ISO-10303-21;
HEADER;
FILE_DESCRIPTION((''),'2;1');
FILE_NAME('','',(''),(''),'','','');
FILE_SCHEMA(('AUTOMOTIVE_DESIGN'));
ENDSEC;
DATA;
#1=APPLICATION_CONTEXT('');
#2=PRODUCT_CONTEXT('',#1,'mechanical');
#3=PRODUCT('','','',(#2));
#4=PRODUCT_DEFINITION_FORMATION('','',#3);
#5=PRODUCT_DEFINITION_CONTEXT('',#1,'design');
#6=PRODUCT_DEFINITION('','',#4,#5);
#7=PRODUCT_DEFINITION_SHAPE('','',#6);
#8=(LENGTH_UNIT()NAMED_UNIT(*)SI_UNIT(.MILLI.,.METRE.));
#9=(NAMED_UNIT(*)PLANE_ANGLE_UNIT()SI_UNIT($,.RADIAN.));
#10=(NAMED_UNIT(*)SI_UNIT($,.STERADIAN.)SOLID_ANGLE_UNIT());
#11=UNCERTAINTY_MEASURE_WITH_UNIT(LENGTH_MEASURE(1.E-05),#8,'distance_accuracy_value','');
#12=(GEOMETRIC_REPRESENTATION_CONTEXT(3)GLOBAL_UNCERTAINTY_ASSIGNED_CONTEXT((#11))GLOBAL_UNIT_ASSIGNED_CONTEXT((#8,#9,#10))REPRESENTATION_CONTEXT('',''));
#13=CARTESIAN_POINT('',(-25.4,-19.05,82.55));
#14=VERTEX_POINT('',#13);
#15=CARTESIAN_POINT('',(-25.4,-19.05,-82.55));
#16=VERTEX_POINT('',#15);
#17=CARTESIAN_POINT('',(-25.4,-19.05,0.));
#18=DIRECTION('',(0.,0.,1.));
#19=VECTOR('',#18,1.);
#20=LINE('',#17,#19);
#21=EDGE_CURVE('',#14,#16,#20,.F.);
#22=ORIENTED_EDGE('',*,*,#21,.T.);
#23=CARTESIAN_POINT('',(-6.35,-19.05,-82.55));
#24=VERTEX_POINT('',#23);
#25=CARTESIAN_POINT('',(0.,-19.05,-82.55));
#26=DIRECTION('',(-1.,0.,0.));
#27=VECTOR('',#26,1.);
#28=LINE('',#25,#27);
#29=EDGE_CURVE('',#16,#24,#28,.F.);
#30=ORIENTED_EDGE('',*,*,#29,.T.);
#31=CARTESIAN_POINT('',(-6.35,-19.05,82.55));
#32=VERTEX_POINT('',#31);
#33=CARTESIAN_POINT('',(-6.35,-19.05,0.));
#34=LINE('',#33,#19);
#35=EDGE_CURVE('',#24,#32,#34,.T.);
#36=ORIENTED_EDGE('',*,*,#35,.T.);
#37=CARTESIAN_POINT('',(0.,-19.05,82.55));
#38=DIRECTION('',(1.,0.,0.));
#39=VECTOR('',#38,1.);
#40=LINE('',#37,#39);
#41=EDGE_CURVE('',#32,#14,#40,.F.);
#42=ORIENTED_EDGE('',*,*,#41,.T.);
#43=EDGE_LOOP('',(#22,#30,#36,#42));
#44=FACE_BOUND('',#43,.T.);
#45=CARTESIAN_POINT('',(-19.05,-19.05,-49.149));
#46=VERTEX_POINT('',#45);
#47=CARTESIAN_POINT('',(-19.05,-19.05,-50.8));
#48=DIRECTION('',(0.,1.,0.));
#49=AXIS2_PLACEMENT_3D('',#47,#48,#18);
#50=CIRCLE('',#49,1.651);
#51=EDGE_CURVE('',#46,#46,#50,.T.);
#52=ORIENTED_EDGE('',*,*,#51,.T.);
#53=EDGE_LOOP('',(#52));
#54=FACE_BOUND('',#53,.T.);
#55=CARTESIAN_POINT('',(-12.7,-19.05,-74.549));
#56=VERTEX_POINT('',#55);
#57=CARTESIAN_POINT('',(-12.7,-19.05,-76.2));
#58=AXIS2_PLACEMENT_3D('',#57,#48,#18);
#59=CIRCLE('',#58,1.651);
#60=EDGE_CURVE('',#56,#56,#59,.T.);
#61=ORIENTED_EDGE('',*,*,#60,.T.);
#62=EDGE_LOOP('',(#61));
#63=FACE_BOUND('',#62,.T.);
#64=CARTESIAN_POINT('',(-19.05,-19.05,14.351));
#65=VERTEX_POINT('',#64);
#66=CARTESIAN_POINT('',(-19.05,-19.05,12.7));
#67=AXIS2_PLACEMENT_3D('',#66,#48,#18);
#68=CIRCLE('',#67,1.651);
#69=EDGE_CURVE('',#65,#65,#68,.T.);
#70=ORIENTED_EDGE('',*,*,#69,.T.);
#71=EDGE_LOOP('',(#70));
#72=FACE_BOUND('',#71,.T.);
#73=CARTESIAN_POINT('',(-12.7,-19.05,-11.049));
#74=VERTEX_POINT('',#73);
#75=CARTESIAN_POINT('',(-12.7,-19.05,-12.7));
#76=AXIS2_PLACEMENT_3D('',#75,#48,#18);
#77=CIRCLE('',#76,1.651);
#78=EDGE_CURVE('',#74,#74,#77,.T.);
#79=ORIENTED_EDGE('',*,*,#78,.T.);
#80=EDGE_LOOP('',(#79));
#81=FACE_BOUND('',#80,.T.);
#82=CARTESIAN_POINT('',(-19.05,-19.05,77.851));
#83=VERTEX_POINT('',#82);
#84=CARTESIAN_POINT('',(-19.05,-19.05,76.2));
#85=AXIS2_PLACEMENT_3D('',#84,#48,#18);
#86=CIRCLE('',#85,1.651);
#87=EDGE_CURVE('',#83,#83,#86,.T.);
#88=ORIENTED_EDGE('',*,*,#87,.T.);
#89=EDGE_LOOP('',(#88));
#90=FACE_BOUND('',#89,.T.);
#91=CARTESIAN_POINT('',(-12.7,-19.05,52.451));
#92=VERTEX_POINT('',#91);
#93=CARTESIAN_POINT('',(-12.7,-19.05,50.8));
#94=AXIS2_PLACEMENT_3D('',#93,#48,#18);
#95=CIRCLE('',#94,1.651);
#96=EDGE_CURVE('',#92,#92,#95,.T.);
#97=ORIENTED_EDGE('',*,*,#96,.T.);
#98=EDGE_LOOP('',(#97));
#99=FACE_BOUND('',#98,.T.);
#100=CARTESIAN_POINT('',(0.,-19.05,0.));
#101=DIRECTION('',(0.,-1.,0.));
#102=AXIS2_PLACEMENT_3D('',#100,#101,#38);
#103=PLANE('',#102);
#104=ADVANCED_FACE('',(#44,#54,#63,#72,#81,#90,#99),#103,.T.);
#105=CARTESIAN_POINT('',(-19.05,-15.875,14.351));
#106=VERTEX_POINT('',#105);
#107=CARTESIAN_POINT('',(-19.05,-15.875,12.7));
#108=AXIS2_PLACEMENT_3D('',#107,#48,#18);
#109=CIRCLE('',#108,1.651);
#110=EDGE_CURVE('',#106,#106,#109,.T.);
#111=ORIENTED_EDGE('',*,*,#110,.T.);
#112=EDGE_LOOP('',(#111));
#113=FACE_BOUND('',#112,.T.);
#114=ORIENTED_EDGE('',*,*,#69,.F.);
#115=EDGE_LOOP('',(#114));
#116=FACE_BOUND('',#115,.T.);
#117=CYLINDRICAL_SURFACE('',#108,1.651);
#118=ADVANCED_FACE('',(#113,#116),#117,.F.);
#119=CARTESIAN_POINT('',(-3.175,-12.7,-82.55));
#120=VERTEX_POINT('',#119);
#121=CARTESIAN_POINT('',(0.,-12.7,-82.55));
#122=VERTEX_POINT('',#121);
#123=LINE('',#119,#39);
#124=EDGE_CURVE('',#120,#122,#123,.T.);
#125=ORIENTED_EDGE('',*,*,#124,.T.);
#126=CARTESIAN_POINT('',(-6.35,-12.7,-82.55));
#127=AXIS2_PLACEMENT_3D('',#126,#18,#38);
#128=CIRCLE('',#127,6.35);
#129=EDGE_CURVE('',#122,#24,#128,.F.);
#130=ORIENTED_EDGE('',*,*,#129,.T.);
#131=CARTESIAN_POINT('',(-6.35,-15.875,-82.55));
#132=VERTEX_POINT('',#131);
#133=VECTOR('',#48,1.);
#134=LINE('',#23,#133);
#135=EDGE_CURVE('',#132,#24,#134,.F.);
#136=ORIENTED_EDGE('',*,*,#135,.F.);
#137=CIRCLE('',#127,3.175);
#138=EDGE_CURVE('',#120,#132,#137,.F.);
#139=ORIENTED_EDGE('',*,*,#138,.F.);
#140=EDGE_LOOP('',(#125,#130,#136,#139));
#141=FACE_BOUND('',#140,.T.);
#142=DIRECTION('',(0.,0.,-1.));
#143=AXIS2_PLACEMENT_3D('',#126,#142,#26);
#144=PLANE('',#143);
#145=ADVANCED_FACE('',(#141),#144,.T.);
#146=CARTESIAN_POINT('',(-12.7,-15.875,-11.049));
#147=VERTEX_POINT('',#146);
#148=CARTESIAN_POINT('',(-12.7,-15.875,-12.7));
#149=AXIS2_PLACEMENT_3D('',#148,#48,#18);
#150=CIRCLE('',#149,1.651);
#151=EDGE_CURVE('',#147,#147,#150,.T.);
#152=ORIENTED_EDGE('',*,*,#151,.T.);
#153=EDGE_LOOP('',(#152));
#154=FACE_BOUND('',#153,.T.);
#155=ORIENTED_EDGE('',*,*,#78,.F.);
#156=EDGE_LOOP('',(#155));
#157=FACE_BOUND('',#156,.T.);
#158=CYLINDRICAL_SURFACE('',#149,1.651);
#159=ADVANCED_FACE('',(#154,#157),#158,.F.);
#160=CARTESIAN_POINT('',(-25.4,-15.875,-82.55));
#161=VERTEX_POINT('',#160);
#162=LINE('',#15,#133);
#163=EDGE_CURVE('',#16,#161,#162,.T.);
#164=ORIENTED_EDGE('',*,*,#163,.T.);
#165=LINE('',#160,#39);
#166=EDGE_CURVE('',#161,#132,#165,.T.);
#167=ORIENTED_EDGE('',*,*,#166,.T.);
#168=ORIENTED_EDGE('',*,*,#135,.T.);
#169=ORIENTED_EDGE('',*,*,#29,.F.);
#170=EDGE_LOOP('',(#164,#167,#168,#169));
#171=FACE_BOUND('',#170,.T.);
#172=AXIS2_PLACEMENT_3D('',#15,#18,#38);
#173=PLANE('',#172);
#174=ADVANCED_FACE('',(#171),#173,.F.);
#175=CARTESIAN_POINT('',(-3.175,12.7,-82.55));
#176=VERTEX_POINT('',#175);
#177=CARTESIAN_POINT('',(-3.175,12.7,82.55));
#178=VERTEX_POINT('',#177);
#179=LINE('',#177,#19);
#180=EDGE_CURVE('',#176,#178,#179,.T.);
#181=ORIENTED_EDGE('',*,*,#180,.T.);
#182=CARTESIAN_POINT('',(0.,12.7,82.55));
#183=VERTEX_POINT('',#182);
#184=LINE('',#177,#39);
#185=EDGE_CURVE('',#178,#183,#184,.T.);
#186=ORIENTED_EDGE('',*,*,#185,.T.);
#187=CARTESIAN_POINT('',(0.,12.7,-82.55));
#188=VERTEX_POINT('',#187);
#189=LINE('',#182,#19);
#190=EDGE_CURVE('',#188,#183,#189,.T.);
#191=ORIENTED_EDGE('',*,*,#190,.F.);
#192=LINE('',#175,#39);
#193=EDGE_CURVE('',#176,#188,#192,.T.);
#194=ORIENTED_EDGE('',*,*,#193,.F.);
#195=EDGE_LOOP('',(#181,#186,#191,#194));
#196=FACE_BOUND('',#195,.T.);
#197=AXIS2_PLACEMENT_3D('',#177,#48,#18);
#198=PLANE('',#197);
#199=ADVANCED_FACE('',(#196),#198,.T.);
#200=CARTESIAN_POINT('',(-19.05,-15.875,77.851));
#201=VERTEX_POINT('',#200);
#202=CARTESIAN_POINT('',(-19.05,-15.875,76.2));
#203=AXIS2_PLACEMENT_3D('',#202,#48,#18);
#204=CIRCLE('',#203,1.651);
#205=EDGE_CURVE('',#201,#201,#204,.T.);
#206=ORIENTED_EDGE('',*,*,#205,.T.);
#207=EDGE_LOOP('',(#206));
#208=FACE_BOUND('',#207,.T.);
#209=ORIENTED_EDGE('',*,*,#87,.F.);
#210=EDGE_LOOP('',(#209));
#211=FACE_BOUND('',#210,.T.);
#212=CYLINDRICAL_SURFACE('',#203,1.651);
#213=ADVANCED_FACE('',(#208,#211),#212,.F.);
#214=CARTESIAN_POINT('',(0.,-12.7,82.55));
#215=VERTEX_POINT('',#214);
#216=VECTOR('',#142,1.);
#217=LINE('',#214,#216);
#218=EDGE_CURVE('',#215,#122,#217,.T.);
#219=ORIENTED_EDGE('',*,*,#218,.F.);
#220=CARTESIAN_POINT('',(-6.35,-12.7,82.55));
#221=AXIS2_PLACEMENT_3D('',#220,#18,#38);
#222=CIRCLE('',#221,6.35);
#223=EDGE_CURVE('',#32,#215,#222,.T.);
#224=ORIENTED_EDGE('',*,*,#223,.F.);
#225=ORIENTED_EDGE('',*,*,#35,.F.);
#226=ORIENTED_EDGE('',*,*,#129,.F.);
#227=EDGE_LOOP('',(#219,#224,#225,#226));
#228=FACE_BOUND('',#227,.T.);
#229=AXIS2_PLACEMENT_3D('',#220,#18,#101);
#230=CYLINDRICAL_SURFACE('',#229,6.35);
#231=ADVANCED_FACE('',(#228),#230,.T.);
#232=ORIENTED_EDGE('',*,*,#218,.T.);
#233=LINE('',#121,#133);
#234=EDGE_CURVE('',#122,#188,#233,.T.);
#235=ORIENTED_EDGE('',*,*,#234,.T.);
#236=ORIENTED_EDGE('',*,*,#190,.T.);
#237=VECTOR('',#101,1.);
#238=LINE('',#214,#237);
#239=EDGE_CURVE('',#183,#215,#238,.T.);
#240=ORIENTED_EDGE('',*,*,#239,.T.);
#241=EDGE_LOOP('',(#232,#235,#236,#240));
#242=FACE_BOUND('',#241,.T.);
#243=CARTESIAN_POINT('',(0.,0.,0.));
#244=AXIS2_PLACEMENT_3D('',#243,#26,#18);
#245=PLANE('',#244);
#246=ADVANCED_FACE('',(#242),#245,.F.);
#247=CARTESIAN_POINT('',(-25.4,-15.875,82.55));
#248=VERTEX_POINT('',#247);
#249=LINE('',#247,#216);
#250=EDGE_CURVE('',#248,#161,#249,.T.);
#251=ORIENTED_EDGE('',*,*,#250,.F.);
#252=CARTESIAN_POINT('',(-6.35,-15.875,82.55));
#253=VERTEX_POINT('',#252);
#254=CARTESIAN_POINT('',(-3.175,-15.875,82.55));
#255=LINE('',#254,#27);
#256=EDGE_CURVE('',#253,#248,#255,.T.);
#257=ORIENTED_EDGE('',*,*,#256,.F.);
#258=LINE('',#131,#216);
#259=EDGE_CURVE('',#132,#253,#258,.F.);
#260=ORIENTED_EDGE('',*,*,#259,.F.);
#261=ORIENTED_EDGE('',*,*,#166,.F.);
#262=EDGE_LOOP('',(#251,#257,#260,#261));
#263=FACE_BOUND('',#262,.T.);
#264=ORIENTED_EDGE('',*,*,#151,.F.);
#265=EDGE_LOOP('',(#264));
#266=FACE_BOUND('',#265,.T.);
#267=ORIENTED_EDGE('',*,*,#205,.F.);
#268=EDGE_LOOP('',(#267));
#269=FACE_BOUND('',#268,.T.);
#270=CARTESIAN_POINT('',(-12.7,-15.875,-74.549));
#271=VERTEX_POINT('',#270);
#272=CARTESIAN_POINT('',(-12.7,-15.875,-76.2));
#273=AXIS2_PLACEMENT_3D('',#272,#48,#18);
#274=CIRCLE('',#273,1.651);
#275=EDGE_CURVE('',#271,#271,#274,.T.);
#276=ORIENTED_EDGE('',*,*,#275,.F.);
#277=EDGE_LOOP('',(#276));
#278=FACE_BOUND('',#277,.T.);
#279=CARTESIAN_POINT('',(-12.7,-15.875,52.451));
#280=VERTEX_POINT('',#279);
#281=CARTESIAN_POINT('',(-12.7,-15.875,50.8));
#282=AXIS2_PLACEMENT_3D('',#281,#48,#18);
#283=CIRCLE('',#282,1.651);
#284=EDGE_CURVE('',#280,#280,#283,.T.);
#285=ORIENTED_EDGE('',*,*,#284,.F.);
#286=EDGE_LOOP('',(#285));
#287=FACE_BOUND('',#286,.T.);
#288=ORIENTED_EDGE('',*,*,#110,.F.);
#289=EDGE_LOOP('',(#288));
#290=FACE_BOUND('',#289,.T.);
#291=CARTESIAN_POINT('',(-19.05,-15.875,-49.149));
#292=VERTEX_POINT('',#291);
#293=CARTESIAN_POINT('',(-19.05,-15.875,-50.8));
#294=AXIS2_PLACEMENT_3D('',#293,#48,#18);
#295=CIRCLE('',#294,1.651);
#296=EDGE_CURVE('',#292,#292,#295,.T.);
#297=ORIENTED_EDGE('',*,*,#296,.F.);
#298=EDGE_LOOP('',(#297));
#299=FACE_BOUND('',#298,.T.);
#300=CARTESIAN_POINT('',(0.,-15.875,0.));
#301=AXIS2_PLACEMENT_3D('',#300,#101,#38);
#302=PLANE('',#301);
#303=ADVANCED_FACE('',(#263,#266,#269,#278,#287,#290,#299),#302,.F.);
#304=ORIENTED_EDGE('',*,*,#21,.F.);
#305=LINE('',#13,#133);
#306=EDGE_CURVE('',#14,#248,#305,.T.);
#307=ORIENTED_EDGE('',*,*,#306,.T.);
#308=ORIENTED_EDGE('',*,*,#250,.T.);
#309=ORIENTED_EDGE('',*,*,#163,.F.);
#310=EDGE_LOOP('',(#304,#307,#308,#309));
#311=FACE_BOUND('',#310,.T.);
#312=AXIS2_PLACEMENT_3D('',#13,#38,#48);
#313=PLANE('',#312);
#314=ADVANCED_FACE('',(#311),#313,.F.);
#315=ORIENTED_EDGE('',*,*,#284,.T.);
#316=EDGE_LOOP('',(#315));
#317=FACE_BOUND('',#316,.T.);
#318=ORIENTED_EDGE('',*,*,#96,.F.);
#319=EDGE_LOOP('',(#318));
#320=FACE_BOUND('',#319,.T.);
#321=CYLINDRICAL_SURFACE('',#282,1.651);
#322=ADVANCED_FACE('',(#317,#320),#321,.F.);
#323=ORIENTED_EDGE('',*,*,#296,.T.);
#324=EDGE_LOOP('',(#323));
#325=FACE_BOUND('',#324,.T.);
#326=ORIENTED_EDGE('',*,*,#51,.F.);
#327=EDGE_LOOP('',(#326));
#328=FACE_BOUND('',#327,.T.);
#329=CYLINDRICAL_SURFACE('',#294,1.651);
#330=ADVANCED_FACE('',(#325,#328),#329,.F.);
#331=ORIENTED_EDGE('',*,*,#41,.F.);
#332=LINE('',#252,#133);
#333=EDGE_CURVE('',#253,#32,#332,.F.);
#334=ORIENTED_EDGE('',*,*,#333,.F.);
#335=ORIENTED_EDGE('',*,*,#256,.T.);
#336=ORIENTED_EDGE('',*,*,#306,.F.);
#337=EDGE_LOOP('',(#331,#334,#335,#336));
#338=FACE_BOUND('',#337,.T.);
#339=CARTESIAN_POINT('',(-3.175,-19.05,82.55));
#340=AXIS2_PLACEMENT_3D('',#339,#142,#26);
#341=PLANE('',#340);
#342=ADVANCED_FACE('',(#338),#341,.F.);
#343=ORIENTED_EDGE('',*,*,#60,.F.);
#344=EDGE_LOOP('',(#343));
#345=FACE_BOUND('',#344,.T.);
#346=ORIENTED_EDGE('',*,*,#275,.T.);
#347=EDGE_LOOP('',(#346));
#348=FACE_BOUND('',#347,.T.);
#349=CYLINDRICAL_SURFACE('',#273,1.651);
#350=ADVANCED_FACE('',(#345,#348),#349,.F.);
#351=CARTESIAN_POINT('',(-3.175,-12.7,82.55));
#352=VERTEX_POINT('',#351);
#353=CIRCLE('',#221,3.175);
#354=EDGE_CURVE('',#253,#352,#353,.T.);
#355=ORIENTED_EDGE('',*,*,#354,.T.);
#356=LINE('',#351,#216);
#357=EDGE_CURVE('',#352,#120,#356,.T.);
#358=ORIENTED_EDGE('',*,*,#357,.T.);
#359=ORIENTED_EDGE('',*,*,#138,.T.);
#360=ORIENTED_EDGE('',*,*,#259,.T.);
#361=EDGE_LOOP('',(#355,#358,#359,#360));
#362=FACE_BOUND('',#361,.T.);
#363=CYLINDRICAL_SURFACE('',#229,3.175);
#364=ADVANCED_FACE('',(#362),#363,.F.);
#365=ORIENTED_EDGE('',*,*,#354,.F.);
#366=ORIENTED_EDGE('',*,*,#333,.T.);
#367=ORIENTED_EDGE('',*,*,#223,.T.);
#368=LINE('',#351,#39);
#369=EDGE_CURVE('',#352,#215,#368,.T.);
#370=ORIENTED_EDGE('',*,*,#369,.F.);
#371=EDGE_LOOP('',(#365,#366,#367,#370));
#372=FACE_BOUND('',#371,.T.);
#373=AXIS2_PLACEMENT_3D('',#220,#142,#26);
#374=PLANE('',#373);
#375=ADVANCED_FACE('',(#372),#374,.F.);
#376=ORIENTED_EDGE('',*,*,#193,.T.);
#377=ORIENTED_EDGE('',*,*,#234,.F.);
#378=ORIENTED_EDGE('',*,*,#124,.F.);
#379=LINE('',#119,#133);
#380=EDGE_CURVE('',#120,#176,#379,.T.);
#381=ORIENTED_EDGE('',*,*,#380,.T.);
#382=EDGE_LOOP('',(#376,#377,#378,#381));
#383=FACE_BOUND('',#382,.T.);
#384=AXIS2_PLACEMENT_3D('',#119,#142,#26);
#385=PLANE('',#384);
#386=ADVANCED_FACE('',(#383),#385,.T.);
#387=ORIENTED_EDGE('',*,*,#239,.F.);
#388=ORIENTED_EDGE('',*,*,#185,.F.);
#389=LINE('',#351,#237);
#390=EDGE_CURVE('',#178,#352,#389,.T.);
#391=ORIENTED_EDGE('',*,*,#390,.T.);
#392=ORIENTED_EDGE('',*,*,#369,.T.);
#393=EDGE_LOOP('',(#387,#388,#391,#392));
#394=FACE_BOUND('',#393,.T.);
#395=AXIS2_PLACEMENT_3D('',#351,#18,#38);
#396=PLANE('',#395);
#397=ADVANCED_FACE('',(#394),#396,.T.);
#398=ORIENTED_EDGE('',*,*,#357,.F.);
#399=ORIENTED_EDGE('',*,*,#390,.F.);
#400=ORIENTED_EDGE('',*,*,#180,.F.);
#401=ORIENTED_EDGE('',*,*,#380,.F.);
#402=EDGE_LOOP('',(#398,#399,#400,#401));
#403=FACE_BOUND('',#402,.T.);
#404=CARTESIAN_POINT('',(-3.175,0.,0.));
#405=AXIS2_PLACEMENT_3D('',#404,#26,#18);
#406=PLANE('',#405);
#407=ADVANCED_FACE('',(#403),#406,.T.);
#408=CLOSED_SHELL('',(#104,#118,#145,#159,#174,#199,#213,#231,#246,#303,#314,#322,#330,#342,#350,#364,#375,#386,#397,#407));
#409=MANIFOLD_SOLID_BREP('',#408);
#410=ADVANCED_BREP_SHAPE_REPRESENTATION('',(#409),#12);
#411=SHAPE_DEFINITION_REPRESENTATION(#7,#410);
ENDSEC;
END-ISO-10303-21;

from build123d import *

# Parameters (mm, degrees)
SKETCH2_W                   = 165.1
SKETCH2_H                   = 25.4
BASE_FLANGE1_DEPTH          = 3.175
EDGE_FLANGE1_DEPTH          = 165.1
F_1_8_0_13_DIAMETER_HOLE1_D = 3.302


# Sheet-metal steps are written as plain solids
with BuildPart() as part:
    # Sketch2 → Base-Flange1 (new body)
    with BuildSketch(Plane(origin=(0, 0, 0), x_dir=(0, 0, -1), z_dir=(1, 0, 0))):
        Rectangle(SKETCH2_W, SKETCH2_H)
    extrude(amount=-BASE_FLANGE1_DEPTH)

    # Edge-Flange1 section (across the edge) → Edge-Flange1 (add)
    with BuildSketch(Plane(origin=(-3.175, -15.875, -82.55), x_dir=(0, 1, 0), z_dir=(0, 0, 1))):
        with BuildLine():
            Line((-3.175, 3.175), (-3.175, 22.225))
            Line((-3.175, 22.225), (0, 22.225))
            Line((0, 22.225), (0, 3.175))
            ThreePointArc((0, 3.175), (0.92993597, 0.92993597), (3.175, 0))
            Line((3.175, 0), (3.175, -3.175))
            ThreePointArc((3.175, -3.175), (-1.315128061, -1.315128061), (-3.175, 3.175))
        make_face()
    extrude(amount=EDGE_FLANGE1_DEPTH)

    # 1/8 (0.13) Diameter Hole1 (through all)
    with Locations(Plane(origin=(0, -15.875, 0), x_dir=(1, 0, 0), z_dir=(0, 1, 0))):
        with Locations((-12.7, 76.2), (-19.05, 50.8), (-12.7, 12.7), (-19.05, -12.7), (-12.7, -50.8), (-19.05, -76.2)):
            Hole(F_1_8_0_13_DIAMETER_HOLE1_D / 2)


solid = part.part
